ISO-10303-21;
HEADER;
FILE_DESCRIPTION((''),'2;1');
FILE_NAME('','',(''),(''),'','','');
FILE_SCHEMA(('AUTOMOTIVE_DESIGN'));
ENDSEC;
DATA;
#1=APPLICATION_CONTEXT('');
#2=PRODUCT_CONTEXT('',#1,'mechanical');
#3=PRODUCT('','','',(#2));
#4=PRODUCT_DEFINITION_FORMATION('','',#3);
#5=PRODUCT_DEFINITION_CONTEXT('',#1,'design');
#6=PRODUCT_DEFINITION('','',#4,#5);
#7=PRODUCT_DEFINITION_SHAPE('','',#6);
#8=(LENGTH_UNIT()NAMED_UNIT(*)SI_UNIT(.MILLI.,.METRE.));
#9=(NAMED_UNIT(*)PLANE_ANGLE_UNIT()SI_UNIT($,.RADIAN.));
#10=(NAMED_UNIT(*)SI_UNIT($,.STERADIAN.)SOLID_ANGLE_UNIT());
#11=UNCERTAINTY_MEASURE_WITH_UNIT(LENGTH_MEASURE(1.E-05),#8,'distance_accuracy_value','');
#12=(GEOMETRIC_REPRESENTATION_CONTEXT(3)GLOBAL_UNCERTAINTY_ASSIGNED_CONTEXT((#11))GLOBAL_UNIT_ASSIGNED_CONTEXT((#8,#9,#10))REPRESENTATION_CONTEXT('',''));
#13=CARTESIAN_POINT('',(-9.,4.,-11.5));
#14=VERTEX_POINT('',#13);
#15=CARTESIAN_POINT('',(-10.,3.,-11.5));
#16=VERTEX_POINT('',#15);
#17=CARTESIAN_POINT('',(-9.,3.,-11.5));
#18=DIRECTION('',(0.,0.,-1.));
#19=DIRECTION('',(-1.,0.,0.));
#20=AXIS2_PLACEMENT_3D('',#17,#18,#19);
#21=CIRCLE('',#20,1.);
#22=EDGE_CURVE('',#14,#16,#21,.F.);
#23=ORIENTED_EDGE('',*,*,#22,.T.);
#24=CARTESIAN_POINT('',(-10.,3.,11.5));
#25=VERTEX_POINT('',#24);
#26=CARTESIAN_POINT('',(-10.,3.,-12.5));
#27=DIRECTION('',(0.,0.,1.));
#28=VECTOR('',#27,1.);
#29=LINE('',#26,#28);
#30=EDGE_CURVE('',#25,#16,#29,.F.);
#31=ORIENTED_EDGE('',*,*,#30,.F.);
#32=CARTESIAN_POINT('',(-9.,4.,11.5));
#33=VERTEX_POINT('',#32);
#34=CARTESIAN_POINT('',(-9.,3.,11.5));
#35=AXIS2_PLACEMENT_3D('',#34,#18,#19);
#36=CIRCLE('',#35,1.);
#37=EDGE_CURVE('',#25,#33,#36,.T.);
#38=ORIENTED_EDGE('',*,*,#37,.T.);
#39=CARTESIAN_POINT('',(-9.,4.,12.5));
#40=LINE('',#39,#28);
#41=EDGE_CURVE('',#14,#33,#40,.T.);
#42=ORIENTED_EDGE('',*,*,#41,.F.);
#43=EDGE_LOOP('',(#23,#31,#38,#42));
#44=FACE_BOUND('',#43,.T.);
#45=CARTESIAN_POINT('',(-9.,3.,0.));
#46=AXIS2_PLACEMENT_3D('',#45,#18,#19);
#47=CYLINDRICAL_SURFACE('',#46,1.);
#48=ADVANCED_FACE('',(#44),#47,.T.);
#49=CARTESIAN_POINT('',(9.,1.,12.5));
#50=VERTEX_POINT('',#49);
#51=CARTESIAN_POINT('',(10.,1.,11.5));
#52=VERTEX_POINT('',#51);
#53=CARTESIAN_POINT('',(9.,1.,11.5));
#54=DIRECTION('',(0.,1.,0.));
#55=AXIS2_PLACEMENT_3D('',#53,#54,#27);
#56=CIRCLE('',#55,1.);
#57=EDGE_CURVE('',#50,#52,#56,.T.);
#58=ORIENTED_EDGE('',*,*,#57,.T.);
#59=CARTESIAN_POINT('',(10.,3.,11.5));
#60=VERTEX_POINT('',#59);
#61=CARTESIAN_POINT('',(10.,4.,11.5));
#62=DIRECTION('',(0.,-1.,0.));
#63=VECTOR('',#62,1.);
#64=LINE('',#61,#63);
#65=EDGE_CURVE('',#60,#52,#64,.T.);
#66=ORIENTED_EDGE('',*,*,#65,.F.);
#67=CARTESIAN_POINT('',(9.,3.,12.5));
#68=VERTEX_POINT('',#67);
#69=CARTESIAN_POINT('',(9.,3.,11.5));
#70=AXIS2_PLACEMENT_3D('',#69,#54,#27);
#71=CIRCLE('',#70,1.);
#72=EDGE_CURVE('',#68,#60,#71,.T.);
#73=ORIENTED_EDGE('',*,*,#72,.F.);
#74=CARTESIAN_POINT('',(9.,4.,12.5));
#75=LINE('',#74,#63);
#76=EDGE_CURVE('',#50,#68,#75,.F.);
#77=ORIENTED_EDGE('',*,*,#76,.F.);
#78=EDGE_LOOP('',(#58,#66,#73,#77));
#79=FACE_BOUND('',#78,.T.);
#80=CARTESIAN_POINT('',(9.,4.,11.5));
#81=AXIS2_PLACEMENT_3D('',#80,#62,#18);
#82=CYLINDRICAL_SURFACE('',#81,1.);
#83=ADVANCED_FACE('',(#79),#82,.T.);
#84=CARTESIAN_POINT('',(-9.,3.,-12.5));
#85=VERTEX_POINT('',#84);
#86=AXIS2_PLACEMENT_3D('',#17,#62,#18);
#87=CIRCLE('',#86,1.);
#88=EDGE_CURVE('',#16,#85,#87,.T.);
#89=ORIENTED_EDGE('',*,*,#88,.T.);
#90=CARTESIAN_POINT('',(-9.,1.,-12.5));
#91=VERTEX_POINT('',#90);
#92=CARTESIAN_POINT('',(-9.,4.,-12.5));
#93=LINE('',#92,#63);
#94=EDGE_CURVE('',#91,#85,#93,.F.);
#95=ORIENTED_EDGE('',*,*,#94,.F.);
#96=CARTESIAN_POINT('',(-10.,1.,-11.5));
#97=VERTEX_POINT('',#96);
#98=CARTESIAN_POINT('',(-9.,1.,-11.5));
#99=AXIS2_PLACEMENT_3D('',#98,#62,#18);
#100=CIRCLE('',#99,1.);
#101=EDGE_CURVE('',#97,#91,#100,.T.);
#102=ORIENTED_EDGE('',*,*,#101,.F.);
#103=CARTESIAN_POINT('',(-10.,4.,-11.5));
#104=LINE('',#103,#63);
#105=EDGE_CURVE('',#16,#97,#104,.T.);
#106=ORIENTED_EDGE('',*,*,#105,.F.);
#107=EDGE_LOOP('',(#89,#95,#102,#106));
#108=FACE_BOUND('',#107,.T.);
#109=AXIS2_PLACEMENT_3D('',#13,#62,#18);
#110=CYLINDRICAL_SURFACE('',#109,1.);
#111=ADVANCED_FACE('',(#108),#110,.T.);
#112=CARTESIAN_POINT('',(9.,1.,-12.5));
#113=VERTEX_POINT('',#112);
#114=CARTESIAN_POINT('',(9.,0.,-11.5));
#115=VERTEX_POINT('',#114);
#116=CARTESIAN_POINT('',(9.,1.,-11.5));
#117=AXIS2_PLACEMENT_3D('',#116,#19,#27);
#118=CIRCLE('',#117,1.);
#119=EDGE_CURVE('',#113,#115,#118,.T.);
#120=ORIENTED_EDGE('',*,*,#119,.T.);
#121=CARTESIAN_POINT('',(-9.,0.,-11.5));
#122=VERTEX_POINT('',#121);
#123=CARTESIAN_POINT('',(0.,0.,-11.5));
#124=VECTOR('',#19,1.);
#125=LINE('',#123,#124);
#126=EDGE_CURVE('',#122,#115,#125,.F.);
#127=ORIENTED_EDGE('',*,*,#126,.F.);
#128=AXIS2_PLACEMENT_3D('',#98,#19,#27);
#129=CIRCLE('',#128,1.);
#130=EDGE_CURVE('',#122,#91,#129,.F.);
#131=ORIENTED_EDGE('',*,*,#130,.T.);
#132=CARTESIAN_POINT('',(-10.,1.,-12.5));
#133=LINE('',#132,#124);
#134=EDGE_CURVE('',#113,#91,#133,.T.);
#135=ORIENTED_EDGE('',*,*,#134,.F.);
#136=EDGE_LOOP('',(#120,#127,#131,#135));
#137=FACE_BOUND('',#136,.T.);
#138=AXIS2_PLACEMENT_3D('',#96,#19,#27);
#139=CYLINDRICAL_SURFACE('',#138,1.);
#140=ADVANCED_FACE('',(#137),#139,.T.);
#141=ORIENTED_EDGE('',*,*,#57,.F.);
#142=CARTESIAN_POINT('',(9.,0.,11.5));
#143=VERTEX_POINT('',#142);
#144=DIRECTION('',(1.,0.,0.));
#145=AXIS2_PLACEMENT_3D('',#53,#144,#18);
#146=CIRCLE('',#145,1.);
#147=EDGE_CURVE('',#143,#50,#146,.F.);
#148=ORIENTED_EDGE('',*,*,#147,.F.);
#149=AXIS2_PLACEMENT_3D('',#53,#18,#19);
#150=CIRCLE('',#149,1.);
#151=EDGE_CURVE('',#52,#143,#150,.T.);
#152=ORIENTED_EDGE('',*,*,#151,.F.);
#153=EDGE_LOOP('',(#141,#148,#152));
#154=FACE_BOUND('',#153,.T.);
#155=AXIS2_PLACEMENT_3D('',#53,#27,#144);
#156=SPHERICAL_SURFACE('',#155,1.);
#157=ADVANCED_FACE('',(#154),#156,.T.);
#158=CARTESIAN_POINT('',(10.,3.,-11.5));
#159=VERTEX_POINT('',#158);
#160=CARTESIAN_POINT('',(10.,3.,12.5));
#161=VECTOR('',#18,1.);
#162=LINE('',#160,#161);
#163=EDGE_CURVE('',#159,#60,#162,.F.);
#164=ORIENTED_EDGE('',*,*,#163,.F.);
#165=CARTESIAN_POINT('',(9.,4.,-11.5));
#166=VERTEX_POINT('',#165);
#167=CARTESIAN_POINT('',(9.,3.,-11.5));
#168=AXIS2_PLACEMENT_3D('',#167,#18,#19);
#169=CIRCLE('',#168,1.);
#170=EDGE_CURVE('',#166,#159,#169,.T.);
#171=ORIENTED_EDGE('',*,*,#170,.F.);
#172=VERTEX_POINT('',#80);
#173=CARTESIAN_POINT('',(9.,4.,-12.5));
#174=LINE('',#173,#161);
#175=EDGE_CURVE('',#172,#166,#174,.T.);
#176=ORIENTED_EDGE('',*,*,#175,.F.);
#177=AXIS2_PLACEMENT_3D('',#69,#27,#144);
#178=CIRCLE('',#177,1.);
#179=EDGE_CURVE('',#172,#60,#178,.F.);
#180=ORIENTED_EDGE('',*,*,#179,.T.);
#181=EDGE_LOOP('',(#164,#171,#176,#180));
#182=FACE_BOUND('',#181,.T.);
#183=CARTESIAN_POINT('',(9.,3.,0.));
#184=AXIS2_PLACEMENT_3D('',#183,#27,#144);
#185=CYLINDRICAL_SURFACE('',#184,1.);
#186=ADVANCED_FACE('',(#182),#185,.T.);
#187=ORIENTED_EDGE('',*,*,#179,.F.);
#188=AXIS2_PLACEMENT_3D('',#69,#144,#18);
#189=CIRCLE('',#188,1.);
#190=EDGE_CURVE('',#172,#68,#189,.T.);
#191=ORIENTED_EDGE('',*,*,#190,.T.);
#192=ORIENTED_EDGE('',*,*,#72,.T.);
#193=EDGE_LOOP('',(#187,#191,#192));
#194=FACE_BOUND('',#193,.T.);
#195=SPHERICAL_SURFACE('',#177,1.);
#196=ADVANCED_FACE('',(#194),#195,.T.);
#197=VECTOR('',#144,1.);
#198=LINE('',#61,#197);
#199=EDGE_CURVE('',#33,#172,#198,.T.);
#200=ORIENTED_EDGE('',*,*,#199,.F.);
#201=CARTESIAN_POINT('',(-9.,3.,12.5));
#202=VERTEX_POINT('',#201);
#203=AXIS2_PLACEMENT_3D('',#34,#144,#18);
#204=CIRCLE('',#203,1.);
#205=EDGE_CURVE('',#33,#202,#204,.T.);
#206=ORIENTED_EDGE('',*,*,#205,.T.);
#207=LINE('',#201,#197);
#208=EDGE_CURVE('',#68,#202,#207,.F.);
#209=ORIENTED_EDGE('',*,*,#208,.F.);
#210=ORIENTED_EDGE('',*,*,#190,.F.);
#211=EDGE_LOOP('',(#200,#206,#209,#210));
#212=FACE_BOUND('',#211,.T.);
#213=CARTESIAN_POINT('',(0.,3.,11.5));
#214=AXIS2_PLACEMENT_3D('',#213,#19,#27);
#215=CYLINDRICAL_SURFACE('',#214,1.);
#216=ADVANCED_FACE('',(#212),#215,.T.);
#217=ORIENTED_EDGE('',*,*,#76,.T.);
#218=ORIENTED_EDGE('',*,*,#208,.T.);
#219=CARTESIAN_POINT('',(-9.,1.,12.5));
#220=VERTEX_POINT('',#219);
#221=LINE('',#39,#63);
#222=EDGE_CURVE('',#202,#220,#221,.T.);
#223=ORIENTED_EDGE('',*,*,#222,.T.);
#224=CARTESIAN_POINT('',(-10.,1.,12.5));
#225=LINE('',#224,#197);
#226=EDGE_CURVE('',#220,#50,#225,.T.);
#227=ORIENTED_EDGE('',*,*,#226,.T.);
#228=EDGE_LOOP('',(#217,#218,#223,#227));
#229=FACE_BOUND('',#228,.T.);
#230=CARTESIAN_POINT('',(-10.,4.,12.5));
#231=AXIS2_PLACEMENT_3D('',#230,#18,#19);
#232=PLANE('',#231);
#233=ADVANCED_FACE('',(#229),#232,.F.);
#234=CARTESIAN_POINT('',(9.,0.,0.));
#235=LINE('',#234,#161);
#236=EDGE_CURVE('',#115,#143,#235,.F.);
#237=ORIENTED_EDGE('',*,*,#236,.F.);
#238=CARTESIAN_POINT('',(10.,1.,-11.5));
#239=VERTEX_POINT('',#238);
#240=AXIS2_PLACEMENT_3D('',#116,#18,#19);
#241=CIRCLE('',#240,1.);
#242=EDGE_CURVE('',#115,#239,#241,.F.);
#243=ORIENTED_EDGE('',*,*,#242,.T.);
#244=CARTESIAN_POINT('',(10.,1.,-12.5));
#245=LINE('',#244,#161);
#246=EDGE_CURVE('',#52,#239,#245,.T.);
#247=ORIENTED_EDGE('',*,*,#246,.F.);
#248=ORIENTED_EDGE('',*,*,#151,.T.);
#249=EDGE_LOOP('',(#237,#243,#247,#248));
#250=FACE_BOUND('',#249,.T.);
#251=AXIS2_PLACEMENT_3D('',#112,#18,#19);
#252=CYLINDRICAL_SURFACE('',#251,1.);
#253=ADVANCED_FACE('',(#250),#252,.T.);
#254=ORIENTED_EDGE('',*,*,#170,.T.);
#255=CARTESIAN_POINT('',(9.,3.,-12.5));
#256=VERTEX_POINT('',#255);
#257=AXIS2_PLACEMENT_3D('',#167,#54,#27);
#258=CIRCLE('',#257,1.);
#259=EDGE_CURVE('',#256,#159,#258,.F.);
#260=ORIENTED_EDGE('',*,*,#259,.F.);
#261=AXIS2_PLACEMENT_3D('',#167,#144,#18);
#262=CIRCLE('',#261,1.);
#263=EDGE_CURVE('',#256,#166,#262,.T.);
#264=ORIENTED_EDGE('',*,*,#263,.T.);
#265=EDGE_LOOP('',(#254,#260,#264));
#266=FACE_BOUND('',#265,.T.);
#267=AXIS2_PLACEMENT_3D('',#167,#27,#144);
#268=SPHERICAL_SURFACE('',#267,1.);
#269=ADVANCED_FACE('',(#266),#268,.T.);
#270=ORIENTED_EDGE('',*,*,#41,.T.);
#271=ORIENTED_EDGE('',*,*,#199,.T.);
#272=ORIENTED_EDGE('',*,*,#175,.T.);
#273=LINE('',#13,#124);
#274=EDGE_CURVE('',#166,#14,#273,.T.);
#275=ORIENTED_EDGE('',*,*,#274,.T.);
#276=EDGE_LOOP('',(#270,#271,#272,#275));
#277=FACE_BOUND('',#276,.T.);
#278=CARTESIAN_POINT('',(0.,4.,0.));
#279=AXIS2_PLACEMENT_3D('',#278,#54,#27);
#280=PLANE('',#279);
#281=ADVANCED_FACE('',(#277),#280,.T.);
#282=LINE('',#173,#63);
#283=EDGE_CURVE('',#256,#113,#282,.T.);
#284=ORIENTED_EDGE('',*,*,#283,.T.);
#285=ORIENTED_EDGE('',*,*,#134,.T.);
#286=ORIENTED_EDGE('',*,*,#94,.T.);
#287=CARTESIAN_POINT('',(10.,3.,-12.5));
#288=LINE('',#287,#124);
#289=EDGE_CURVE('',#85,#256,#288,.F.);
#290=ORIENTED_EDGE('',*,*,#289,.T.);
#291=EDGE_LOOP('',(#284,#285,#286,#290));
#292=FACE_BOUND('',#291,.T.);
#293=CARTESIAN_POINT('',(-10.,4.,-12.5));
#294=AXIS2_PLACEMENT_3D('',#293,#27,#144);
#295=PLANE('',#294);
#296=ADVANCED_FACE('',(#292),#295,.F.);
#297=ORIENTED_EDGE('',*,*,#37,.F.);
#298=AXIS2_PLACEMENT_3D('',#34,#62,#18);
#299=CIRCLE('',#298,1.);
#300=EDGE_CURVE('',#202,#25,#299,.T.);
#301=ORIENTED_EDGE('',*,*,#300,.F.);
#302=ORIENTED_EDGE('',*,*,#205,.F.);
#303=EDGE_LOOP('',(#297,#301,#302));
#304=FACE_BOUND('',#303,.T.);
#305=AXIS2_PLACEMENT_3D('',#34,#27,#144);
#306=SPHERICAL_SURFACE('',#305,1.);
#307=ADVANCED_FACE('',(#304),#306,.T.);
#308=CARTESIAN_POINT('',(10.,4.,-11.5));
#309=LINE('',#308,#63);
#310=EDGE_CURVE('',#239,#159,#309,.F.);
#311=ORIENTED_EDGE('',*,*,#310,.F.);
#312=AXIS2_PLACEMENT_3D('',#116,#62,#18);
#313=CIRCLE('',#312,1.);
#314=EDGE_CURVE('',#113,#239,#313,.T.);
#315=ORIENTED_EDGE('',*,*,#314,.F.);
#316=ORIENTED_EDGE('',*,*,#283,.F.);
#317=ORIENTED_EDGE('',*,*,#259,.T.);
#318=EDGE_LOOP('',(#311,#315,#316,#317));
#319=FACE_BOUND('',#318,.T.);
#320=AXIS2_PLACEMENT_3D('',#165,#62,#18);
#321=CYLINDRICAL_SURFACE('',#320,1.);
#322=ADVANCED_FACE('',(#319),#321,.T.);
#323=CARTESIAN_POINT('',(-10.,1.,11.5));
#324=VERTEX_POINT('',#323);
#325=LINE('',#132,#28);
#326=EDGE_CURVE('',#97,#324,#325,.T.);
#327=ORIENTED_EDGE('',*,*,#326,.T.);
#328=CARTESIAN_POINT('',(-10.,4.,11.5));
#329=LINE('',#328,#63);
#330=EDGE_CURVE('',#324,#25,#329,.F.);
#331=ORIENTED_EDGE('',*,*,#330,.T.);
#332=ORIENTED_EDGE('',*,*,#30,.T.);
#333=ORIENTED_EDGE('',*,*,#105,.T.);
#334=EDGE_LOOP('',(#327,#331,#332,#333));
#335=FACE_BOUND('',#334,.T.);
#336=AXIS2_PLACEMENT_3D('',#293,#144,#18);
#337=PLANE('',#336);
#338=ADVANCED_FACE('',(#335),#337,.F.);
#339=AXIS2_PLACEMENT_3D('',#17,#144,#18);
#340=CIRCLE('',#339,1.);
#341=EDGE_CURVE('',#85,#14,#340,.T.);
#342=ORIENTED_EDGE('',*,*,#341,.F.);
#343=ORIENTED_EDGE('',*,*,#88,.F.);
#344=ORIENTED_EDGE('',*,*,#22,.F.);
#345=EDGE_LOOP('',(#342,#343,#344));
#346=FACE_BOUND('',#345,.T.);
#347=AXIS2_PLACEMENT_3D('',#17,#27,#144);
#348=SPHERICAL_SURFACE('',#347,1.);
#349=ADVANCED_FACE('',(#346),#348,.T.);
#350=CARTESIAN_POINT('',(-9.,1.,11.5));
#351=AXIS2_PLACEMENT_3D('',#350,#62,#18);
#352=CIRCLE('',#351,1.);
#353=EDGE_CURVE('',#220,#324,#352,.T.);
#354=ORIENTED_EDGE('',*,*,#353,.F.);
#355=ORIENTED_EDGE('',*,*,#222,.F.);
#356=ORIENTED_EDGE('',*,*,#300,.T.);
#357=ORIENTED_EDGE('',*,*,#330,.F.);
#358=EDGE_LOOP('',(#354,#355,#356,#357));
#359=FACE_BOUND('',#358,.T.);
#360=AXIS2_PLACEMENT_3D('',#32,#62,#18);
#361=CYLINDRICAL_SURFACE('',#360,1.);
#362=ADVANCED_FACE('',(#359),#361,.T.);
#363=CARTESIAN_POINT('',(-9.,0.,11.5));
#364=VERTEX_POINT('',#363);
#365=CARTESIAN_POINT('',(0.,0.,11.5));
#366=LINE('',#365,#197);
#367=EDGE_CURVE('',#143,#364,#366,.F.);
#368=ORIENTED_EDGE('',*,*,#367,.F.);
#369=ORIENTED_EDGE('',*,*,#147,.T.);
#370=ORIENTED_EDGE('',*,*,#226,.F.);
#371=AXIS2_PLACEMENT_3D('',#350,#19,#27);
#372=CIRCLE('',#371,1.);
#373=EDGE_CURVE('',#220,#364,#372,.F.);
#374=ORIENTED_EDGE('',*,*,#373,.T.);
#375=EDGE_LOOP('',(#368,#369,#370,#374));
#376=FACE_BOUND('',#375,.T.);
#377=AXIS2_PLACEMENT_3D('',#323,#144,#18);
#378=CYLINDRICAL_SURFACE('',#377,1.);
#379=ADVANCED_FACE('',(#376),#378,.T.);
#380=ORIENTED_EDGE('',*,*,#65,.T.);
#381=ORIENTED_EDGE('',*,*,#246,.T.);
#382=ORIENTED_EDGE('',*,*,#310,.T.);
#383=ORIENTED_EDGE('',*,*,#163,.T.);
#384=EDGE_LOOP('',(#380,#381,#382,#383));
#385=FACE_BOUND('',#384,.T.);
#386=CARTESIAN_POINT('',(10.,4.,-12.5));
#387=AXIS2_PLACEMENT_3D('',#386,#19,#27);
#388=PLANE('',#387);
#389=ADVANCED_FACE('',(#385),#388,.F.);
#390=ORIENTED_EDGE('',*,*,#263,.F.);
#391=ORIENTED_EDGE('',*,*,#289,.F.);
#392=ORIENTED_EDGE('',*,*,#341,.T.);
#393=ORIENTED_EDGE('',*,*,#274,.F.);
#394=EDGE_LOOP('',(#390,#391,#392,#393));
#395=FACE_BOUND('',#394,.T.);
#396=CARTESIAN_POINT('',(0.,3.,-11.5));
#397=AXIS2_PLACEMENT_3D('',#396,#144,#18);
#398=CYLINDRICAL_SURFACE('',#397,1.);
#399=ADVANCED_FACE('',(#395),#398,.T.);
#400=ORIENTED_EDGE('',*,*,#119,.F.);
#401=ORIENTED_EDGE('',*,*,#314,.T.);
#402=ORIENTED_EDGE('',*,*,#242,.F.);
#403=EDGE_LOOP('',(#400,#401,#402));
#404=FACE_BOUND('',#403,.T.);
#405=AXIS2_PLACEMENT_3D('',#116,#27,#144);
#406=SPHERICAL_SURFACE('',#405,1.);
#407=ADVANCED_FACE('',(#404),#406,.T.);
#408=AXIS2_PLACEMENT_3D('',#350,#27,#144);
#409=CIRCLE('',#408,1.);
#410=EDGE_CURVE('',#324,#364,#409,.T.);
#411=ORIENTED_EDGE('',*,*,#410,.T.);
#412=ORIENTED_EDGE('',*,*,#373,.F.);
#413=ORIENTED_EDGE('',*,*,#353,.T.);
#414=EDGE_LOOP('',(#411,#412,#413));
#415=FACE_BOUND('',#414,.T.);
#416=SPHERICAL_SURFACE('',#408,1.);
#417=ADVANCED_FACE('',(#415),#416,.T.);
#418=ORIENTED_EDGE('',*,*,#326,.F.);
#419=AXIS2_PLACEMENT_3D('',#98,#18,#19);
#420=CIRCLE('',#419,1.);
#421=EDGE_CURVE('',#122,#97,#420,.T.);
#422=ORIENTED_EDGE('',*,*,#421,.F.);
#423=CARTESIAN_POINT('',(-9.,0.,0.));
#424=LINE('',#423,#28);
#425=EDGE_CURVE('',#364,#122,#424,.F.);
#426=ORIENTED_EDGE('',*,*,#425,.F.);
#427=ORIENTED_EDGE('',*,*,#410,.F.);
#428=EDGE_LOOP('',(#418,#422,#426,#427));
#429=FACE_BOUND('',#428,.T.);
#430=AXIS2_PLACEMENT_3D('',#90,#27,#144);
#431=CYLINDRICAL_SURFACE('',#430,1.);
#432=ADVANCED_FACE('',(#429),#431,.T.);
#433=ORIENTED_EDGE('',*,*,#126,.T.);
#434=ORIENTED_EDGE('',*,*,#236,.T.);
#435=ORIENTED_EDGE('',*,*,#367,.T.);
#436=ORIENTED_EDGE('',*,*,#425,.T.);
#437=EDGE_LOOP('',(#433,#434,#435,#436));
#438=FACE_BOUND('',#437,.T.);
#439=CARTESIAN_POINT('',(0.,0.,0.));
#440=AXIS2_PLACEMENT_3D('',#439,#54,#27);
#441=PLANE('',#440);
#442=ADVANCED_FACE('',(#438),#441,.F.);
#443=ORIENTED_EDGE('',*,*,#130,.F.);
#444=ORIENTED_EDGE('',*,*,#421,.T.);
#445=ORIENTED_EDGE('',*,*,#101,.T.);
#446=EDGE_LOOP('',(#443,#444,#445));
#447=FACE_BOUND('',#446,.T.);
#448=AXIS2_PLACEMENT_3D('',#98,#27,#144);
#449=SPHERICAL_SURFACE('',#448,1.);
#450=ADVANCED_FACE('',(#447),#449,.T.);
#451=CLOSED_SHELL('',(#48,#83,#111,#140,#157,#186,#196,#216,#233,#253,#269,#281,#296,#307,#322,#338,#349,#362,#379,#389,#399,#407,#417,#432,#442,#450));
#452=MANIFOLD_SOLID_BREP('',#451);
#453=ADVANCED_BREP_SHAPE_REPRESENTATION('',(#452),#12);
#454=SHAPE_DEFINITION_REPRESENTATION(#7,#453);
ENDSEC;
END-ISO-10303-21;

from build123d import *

# Parameters (mm, degrees)
SKETCH_1_W      = 20
SKETCH_1_H      = 25
EXTRUDE_1_DEPTH = 4
FILLET_2_R      = 1
FILLET_3_R      = 1


with BuildPart() as part:
    # 草图1 → 凸台-拉伸1 (new body)
    with BuildSketch(Plane(origin=(0, 0, 0), x_dir=(1, 0, 0), z_dir=(0, 1, 0))):
        Rectangle(SKETCH_1_W, SKETCH_1_H)
    extrude(amount=EXTRUDE_1_DEPTH)

    # 圆角2
    fillet_2_edges = [part.edges().sort_by_distance(p)[0] for p in [
        (-10, 4, 0),
        (0, 0, 12.5),
        (-10, 0, 0),
        (0, 0, -12.5),
        (10, 0, 0),
        (-10, 2, 12.5),
        (-10, 2, -12.5),
    ]]
    fillet(fillet_2_edges, radius=FILLET_2_R)

    # 圆角3
    # the kernel refuses this fillet: 1 mm, written as the material it takes off along each edge
    with BuildSketch(Plane(origin=(-9, 3, 11.5), x_dir=(0, 0, 1), z_dir=(0, 1, 0))) as fillet_3_piece_1_section:
        Polygon((0, 0), (FILLET_3_R, 0), (FILLET_3_R, -FILLET_3_R), (0, -FILLET_3_R), align=None)
    fillet_3_piece_1 = extrude(amount=FILLET_3_R, mode=Mode.PRIVATE)
    fillet_3_piece_1 = fillet_3_piece_1 - Plane(origin=(-9, 3, 11.5), x_dir=(0.7071067811865475, 0, -0.7071067811865477), z_dir=(0, 1, 0)) * Sphere(FILLET_3_R, mode=Mode.PRIVATE)
    add(fillet_3_piece_1, mode=Mode.SUBTRACT)
    with BuildSketch(Plane(origin=(-9, 3, -11.5), x_dir=(0, 1, 0), z_dir=(0, 0, -1))) as fillet_3_piece_2_section:
        Polygon((0, 0), (FILLET_3_R, 0), (FILLET_3_R, -FILLET_3_R), (0, -FILLET_3_R), align=None)
    fillet_3_piece_2 = extrude(amount=FILLET_3_R, mode=Mode.PRIVATE)
    fillet_3_piece_2 = fillet_3_piece_2 - Plane(origin=(-9, 3, -11.5), x_dir=(0.7071067811865475, -0.7071067811865475, 0), z_dir=(0, 0, -1)) * Sphere(FILLET_3_R, mode=Mode.PRIVATE)
    add(fillet_3_piece_2, mode=Mode.SUBTRACT)
    with BuildSketch(Plane(origin=(9, 1, 11.5), x_dir=(0, 0, 1), z_dir=(1, 0, 0))) as fillet_3_piece_3_section:
        Polygon((0, 0), (FILLET_3_R, 0), (FILLET_3_R, FILLET_3_R), (0, FILLET_3_R), align=None)
    fillet_3_piece_3 = extrude(amount=FILLET_3_R, mode=Mode.PRIVATE)
    fillet_3_piece_3 = fillet_3_piece_3 - Plane(origin=(9, 1, 11.5), x_dir=(0, 0.7071067811865475, -0.7071067811865475), z_dir=(1, 0, 0)) * Sphere(FILLET_3_R, mode=Mode.PRIVATE)
    add(fillet_3_piece_3, mode=Mode.SUBTRACT)
    with BuildSketch(Plane(origin=(9, 1, -11.5), x_dir=(1, 0, 0), z_dir=(0, 0, -1))) as fillet_3_piece_4_section:
        Polygon((0, 0), (FILLET_3_R, 0), (FILLET_3_R, FILLET_3_R), (0, FILLET_3_R), align=None)
    fillet_3_piece_4 = extrude(amount=FILLET_3_R, mode=Mode.PRIVATE)
    fillet_3_piece_4 = fillet_3_piece_4 - Plane(origin=(9, 1, -11.5), x_dir=(-0.7071067811865475, 0.7071067811865475, 0), z_dir=(0, 0, -1)) * Sphere(FILLET_3_R, mode=Mode.PRIVATE)
    add(fillet_3_piece_4, mode=Mode.SUBTRACT)
    with BuildSketch(Plane(origin=(9, 3, 11.5), x_dir=(0, 1, 0), z_dir=(1, 0, 0))) as fillet_3_piece_5_section:
        Polygon((0, 0), (FILLET_3_R, 0), (FILLET_3_R, FILLET_3_R), (0, FILLET_3_R), align=None)
    fillet_3_piece_5 = extrude(amount=FILLET_3_R, mode=Mode.PRIVATE)
    fillet_3_piece_5 = fillet_3_piece_5 - Plane(origin=(9, 3, 11.5), x_dir=(0, -0.7071067811865475, -0.7071067811865475), z_dir=(1, 0, 0)) * Sphere(FILLET_3_R, mode=Mode.PRIVATE)
    add(fillet_3_piece_5, mode=Mode.SUBTRACT)
    with BuildSketch(Plane(origin=(9, 3, -11.5), x_dir=(1, 0, 0), z_dir=(0, 0, -1))) as fillet_3_piece_6_section:
        Polygon((0, 0), (FILLET_3_R, 0), (FILLET_3_R, -FILLET_3_R), (0, -FILLET_3_R), align=None)
    fillet_3_piece_6 = extrude(amount=FILLET_3_R, mode=Mode.PRIVATE)
    fillet_3_piece_6 = fillet_3_piece_6 - Plane(origin=(9, 3, -11.5), x_dir=(-0.7071067811865475, -0.7071067811865475, 0), z_dir=(0, 0, -1)) * Sphere(FILLET_3_R, mode=Mode.PRIVATE)
    add(fillet_3_piece_6, mode=Mode.SUBTRACT)
    with BuildSketch(Plane(origin=(9, 4, 12.5), x_dir=(0, 0, -1), z_dir=(-1, 0, 0))) as fillet_3_piece_7:
        with BuildLine():
            CenterArc((FILLET_3_R, FILLET_3_R), FILLET_3_R, 180, 90)
            Line((0, FILLET_3_R), (0, 0))
            Line((0, 0), (FILLET_3_R, 0))
        make_face()
    extrude(amount=18, mode=Mode.SUBTRACT)
    with BuildSketch(Plane(origin=(10, 4, -11.5), x_dir=(0, -1, 0), z_dir=(0, 0, 1))) as fillet_3_piece_8:
        with BuildLine():
            CenterArc((FILLET_3_R, -FILLET_3_R), FILLET_3_R, 90, 90)
            Line((0, -FILLET_3_R), (0, 0))
            Line((0, 0), (FILLET_3_R, 0))
        make_face()
    extrude(amount=23, mode=Mode.SUBTRACT)
    with BuildSketch(Plane(origin=(-9, 4, -12.5), x_dir=(0, -1, 0), z_dir=(1, 0, 0))) as fillet_3_piece_9:
        with BuildLine():
            CenterArc((FILLET_3_R, -FILLET_3_R), FILLET_3_R, 90, 90)
            Line((0, -FILLET_3_R), (0, 0))
            Line((0, 0), (FILLET_3_R, 0))
        make_face()
    extrude(amount=18, mode=Mode.SUBTRACT)
    with BuildSketch(Plane(origin=(10, 1, 12.5), x_dir=(0, 0, -1), z_dir=(0, 1, 0)), Plane(origin=(10, 1, -12.5), x_dir=(-1, 0, 0), z_dir=(0, 1, 0))) as fillet_3_piece_10:
        with BuildLine():
            CenterArc((FILLET_3_R, FILLET_3_R), FILLET_3_R, 180, 90)
            Line((0, FILLET_3_R), (0, 0))
            Line((0, 0), (FILLET_3_R, 0))
        make_face()
    extrude(amount=2, mode=Mode.SUBTRACT)


solid = part.part
